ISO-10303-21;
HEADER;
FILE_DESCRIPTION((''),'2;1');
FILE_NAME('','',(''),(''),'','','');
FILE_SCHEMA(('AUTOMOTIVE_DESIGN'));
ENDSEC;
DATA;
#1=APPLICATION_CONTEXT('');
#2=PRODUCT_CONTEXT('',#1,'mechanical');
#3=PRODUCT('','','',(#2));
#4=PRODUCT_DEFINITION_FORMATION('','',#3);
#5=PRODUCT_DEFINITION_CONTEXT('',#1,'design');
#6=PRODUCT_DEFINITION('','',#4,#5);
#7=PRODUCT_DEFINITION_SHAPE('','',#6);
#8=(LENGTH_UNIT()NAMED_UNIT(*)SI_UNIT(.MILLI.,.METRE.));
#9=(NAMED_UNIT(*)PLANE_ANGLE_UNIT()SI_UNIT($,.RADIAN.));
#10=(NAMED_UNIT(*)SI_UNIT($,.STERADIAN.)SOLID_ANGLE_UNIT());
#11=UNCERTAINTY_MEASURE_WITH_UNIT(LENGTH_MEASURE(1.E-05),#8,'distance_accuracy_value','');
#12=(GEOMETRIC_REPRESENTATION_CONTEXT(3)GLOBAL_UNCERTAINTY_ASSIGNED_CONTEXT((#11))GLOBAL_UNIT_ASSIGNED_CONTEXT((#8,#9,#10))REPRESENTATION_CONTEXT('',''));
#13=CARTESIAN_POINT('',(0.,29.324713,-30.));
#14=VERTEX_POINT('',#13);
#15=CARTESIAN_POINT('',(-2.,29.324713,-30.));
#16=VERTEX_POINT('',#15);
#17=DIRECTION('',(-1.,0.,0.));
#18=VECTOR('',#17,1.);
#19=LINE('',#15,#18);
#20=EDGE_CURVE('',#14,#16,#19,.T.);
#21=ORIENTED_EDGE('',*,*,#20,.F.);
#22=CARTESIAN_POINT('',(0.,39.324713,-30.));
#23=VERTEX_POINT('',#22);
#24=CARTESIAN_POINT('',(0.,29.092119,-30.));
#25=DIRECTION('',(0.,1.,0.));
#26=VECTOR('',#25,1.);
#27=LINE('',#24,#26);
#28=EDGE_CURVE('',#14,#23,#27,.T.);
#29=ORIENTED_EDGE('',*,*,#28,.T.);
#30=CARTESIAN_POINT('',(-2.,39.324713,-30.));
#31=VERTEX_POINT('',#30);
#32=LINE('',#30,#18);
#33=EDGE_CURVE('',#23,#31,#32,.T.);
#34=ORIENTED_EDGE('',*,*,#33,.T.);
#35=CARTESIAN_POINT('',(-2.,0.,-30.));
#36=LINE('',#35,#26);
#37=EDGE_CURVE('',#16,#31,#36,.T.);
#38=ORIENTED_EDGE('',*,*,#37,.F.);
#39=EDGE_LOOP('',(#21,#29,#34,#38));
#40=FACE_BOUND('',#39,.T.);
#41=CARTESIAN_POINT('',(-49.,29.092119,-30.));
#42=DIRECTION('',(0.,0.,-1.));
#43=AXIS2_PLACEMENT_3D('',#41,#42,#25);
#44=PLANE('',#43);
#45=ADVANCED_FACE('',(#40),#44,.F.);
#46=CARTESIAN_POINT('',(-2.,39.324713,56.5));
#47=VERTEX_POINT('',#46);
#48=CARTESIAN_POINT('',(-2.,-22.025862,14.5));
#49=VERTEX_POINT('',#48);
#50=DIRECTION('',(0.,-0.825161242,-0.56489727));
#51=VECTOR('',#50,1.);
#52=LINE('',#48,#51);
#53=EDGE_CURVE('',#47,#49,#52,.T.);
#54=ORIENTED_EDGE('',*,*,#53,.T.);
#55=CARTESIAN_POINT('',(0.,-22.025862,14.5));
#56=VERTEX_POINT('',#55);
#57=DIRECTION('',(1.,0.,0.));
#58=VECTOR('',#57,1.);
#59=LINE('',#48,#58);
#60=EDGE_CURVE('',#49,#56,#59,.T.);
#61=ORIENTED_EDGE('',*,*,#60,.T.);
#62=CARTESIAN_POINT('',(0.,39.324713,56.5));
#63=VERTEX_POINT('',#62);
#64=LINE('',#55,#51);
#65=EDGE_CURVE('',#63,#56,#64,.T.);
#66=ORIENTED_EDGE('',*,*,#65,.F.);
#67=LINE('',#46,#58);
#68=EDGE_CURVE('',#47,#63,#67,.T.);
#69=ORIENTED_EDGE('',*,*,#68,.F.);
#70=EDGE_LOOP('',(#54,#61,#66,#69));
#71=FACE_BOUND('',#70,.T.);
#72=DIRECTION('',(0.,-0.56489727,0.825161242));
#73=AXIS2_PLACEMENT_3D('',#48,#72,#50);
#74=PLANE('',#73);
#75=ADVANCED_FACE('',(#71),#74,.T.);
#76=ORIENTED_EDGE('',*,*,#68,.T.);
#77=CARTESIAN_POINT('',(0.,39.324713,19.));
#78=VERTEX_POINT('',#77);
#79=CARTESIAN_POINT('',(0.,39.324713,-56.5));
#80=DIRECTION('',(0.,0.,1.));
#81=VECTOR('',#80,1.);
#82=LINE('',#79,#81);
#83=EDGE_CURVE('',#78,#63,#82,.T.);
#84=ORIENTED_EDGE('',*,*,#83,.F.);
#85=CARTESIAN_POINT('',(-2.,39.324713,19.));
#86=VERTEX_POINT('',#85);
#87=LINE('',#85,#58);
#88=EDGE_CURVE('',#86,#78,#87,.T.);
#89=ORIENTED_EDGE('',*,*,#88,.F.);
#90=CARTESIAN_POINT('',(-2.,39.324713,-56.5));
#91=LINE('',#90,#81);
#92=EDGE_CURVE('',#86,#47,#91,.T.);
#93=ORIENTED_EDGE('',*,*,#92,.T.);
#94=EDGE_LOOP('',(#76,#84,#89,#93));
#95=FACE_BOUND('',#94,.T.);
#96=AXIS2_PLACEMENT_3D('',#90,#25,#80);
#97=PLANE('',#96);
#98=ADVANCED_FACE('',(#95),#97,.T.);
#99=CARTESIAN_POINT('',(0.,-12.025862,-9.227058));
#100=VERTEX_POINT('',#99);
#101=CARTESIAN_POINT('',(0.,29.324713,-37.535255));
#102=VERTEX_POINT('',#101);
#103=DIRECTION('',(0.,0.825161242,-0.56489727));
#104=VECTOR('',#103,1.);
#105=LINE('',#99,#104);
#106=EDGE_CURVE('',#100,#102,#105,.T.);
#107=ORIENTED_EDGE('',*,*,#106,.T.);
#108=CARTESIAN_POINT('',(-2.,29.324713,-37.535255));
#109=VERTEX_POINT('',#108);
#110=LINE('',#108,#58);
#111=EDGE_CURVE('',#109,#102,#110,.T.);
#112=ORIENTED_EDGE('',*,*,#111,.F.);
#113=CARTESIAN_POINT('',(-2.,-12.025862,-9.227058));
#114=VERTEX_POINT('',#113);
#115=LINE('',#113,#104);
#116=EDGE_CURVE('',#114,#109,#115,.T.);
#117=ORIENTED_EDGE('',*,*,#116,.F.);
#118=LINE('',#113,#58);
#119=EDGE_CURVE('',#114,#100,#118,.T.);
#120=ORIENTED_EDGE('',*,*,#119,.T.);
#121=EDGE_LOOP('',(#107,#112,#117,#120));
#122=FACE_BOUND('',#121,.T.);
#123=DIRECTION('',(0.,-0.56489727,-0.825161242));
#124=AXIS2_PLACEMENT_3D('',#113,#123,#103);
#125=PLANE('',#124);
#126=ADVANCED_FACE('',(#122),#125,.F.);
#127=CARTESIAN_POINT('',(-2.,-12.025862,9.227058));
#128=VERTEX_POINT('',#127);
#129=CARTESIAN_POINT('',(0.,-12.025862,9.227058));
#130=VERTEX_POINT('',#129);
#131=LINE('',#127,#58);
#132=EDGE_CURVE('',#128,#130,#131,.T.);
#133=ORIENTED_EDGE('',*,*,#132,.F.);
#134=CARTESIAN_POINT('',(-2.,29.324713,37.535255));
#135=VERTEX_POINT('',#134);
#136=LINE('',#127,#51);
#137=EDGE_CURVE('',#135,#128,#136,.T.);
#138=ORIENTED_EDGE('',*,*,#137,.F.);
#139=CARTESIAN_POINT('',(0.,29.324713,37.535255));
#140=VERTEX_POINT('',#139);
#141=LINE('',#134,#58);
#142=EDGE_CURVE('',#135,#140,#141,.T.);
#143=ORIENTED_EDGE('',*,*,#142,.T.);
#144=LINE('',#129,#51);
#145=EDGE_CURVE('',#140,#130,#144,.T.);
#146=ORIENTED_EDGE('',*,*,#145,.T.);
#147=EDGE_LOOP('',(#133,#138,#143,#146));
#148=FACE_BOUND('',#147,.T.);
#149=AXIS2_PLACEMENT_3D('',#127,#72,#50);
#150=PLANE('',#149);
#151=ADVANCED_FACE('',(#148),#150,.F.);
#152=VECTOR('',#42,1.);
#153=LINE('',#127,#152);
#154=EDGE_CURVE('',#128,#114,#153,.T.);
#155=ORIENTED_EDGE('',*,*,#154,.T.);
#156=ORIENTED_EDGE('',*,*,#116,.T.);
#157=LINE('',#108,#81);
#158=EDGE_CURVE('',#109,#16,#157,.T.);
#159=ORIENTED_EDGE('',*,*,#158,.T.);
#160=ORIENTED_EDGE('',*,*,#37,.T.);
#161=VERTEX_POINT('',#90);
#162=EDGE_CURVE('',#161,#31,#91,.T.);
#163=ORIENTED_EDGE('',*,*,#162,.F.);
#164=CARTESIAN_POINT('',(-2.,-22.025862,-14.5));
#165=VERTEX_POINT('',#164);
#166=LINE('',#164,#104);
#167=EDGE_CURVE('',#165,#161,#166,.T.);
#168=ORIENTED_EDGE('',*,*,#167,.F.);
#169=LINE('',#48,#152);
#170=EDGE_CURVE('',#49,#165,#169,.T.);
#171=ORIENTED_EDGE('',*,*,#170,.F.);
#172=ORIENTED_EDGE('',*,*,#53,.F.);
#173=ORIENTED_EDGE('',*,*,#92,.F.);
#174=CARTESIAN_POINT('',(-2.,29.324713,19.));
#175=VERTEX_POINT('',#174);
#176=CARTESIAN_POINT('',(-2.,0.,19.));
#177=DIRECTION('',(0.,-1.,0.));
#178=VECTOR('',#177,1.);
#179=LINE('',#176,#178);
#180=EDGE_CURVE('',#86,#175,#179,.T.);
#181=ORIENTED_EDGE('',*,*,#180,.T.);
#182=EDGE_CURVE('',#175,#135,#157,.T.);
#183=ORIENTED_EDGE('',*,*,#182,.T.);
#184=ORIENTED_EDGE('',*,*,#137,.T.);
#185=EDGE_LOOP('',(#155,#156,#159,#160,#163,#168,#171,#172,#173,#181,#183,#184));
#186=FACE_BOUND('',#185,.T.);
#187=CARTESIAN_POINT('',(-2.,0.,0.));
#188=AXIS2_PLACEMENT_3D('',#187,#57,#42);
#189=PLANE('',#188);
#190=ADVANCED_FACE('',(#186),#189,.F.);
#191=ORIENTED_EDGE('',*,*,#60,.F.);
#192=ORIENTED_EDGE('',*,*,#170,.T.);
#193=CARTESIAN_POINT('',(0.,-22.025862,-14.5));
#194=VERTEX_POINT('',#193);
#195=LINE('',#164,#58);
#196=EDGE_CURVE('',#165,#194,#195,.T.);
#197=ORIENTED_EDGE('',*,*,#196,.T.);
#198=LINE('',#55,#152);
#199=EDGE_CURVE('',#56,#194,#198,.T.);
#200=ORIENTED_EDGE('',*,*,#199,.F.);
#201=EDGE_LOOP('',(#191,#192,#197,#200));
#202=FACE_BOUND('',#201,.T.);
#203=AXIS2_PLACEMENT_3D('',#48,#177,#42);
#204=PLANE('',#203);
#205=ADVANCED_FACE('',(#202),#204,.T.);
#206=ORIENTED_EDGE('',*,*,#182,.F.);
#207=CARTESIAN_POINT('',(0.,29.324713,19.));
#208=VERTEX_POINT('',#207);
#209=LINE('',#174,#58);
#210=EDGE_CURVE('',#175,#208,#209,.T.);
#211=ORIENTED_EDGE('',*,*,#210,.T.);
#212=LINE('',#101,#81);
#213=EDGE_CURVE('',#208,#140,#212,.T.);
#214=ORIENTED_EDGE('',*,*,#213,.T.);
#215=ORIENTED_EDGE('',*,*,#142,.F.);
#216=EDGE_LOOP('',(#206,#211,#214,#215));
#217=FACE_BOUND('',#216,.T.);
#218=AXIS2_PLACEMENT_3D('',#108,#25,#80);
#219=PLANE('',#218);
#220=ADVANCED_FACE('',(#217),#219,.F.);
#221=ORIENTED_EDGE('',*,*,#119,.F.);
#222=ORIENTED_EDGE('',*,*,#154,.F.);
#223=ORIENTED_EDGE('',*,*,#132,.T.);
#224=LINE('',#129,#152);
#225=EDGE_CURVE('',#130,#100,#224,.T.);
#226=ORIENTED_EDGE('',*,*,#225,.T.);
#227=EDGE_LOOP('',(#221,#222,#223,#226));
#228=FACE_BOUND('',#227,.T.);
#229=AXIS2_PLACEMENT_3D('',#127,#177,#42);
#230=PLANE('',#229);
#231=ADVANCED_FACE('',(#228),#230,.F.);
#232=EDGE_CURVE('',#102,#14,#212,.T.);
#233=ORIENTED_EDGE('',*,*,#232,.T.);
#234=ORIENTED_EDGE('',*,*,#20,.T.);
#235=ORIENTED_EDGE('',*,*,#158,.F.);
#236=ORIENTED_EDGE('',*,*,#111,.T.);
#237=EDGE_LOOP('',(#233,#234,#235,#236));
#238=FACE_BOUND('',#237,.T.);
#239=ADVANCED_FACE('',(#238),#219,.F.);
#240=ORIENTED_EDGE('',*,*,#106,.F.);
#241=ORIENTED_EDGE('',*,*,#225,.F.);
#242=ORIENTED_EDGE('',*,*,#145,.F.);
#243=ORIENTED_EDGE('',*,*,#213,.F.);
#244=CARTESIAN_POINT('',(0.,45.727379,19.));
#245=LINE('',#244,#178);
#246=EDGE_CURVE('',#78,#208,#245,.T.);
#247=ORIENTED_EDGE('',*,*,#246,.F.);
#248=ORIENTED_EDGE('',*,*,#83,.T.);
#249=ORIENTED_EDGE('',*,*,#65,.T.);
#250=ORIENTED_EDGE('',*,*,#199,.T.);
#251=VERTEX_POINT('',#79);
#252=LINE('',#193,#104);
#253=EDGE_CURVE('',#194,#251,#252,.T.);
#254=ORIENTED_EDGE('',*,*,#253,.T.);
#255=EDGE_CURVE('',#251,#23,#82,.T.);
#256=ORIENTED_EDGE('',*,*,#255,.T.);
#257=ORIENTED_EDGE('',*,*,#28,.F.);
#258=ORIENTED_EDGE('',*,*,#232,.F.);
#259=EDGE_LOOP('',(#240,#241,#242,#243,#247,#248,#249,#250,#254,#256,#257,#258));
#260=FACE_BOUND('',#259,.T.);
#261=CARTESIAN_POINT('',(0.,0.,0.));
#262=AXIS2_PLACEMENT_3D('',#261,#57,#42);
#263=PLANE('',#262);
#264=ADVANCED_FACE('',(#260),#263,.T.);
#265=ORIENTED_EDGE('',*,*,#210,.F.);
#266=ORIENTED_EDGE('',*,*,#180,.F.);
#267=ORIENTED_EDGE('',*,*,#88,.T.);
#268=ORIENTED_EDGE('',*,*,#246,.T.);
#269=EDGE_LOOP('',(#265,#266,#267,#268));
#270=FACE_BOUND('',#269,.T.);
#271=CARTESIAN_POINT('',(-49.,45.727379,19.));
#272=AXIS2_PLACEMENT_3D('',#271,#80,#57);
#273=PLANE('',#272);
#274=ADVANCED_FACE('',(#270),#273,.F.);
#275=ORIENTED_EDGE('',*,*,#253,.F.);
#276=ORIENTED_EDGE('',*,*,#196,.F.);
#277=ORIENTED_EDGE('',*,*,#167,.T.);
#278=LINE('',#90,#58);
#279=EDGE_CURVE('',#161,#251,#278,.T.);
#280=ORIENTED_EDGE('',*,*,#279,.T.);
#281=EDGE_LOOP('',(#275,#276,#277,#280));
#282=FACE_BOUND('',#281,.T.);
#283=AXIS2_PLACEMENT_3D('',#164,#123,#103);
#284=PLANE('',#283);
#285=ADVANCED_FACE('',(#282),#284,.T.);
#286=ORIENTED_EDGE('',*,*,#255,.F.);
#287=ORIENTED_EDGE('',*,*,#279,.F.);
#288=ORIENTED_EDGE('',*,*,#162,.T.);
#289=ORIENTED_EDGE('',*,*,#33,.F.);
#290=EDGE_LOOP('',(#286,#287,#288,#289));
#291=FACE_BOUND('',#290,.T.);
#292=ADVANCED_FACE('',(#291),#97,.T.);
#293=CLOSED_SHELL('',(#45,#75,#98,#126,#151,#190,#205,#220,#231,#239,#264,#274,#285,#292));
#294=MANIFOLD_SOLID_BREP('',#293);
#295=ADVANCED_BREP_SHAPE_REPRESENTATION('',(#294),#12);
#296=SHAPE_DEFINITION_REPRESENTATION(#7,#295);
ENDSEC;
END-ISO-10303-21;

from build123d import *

# Parameters (mm, degrees)
BASE_FLANGE1_DEPTH = 2
SKETCH6_W          = 49
SKETCH6_H          = 16.635259071
CUT_EXTRUDE1_DEPTH = 49


# Sheet-metal steps are written as plain solids
with BuildPart() as part:
    # Sketch1 → Base-Flange1 (new body)
    with BuildSketch(Plane(origin=(0, 0, 0), x_dir=(0, 0, -1), z_dir=(1, 0, 0))):
        Polygon((-14.5, -22.025862069), (14.5, -22.025862069), (56.5, 39.324712644), (-56.5, 39.324712644), align=None)
        Polygon((-9.227058078, -12.025862069), (9.227058078, -12.025862069), (37.5352548, 29.324712644), (-37.5352548, 29.324712644), align=None, mode=Mode.SUBTRACT)
    extrude(amount=-BASE_FLANGE1_DEPTH)

    # Sketch6 → Cut-Extrude1 (cut)
    with BuildSketch(Plane(origin=(0, 0, 0), x_dir=(0, 0, -1), z_dir=(1, 0, 0))):
        with Locations((5.5, 37.409748974)):
            Rectangle(SKETCH6_W, SKETCH6_H)
    extrude(amount=-CUT_EXTRUDE1_DEPTH, mode=Mode.SUBTRACT)


solid = part.part
